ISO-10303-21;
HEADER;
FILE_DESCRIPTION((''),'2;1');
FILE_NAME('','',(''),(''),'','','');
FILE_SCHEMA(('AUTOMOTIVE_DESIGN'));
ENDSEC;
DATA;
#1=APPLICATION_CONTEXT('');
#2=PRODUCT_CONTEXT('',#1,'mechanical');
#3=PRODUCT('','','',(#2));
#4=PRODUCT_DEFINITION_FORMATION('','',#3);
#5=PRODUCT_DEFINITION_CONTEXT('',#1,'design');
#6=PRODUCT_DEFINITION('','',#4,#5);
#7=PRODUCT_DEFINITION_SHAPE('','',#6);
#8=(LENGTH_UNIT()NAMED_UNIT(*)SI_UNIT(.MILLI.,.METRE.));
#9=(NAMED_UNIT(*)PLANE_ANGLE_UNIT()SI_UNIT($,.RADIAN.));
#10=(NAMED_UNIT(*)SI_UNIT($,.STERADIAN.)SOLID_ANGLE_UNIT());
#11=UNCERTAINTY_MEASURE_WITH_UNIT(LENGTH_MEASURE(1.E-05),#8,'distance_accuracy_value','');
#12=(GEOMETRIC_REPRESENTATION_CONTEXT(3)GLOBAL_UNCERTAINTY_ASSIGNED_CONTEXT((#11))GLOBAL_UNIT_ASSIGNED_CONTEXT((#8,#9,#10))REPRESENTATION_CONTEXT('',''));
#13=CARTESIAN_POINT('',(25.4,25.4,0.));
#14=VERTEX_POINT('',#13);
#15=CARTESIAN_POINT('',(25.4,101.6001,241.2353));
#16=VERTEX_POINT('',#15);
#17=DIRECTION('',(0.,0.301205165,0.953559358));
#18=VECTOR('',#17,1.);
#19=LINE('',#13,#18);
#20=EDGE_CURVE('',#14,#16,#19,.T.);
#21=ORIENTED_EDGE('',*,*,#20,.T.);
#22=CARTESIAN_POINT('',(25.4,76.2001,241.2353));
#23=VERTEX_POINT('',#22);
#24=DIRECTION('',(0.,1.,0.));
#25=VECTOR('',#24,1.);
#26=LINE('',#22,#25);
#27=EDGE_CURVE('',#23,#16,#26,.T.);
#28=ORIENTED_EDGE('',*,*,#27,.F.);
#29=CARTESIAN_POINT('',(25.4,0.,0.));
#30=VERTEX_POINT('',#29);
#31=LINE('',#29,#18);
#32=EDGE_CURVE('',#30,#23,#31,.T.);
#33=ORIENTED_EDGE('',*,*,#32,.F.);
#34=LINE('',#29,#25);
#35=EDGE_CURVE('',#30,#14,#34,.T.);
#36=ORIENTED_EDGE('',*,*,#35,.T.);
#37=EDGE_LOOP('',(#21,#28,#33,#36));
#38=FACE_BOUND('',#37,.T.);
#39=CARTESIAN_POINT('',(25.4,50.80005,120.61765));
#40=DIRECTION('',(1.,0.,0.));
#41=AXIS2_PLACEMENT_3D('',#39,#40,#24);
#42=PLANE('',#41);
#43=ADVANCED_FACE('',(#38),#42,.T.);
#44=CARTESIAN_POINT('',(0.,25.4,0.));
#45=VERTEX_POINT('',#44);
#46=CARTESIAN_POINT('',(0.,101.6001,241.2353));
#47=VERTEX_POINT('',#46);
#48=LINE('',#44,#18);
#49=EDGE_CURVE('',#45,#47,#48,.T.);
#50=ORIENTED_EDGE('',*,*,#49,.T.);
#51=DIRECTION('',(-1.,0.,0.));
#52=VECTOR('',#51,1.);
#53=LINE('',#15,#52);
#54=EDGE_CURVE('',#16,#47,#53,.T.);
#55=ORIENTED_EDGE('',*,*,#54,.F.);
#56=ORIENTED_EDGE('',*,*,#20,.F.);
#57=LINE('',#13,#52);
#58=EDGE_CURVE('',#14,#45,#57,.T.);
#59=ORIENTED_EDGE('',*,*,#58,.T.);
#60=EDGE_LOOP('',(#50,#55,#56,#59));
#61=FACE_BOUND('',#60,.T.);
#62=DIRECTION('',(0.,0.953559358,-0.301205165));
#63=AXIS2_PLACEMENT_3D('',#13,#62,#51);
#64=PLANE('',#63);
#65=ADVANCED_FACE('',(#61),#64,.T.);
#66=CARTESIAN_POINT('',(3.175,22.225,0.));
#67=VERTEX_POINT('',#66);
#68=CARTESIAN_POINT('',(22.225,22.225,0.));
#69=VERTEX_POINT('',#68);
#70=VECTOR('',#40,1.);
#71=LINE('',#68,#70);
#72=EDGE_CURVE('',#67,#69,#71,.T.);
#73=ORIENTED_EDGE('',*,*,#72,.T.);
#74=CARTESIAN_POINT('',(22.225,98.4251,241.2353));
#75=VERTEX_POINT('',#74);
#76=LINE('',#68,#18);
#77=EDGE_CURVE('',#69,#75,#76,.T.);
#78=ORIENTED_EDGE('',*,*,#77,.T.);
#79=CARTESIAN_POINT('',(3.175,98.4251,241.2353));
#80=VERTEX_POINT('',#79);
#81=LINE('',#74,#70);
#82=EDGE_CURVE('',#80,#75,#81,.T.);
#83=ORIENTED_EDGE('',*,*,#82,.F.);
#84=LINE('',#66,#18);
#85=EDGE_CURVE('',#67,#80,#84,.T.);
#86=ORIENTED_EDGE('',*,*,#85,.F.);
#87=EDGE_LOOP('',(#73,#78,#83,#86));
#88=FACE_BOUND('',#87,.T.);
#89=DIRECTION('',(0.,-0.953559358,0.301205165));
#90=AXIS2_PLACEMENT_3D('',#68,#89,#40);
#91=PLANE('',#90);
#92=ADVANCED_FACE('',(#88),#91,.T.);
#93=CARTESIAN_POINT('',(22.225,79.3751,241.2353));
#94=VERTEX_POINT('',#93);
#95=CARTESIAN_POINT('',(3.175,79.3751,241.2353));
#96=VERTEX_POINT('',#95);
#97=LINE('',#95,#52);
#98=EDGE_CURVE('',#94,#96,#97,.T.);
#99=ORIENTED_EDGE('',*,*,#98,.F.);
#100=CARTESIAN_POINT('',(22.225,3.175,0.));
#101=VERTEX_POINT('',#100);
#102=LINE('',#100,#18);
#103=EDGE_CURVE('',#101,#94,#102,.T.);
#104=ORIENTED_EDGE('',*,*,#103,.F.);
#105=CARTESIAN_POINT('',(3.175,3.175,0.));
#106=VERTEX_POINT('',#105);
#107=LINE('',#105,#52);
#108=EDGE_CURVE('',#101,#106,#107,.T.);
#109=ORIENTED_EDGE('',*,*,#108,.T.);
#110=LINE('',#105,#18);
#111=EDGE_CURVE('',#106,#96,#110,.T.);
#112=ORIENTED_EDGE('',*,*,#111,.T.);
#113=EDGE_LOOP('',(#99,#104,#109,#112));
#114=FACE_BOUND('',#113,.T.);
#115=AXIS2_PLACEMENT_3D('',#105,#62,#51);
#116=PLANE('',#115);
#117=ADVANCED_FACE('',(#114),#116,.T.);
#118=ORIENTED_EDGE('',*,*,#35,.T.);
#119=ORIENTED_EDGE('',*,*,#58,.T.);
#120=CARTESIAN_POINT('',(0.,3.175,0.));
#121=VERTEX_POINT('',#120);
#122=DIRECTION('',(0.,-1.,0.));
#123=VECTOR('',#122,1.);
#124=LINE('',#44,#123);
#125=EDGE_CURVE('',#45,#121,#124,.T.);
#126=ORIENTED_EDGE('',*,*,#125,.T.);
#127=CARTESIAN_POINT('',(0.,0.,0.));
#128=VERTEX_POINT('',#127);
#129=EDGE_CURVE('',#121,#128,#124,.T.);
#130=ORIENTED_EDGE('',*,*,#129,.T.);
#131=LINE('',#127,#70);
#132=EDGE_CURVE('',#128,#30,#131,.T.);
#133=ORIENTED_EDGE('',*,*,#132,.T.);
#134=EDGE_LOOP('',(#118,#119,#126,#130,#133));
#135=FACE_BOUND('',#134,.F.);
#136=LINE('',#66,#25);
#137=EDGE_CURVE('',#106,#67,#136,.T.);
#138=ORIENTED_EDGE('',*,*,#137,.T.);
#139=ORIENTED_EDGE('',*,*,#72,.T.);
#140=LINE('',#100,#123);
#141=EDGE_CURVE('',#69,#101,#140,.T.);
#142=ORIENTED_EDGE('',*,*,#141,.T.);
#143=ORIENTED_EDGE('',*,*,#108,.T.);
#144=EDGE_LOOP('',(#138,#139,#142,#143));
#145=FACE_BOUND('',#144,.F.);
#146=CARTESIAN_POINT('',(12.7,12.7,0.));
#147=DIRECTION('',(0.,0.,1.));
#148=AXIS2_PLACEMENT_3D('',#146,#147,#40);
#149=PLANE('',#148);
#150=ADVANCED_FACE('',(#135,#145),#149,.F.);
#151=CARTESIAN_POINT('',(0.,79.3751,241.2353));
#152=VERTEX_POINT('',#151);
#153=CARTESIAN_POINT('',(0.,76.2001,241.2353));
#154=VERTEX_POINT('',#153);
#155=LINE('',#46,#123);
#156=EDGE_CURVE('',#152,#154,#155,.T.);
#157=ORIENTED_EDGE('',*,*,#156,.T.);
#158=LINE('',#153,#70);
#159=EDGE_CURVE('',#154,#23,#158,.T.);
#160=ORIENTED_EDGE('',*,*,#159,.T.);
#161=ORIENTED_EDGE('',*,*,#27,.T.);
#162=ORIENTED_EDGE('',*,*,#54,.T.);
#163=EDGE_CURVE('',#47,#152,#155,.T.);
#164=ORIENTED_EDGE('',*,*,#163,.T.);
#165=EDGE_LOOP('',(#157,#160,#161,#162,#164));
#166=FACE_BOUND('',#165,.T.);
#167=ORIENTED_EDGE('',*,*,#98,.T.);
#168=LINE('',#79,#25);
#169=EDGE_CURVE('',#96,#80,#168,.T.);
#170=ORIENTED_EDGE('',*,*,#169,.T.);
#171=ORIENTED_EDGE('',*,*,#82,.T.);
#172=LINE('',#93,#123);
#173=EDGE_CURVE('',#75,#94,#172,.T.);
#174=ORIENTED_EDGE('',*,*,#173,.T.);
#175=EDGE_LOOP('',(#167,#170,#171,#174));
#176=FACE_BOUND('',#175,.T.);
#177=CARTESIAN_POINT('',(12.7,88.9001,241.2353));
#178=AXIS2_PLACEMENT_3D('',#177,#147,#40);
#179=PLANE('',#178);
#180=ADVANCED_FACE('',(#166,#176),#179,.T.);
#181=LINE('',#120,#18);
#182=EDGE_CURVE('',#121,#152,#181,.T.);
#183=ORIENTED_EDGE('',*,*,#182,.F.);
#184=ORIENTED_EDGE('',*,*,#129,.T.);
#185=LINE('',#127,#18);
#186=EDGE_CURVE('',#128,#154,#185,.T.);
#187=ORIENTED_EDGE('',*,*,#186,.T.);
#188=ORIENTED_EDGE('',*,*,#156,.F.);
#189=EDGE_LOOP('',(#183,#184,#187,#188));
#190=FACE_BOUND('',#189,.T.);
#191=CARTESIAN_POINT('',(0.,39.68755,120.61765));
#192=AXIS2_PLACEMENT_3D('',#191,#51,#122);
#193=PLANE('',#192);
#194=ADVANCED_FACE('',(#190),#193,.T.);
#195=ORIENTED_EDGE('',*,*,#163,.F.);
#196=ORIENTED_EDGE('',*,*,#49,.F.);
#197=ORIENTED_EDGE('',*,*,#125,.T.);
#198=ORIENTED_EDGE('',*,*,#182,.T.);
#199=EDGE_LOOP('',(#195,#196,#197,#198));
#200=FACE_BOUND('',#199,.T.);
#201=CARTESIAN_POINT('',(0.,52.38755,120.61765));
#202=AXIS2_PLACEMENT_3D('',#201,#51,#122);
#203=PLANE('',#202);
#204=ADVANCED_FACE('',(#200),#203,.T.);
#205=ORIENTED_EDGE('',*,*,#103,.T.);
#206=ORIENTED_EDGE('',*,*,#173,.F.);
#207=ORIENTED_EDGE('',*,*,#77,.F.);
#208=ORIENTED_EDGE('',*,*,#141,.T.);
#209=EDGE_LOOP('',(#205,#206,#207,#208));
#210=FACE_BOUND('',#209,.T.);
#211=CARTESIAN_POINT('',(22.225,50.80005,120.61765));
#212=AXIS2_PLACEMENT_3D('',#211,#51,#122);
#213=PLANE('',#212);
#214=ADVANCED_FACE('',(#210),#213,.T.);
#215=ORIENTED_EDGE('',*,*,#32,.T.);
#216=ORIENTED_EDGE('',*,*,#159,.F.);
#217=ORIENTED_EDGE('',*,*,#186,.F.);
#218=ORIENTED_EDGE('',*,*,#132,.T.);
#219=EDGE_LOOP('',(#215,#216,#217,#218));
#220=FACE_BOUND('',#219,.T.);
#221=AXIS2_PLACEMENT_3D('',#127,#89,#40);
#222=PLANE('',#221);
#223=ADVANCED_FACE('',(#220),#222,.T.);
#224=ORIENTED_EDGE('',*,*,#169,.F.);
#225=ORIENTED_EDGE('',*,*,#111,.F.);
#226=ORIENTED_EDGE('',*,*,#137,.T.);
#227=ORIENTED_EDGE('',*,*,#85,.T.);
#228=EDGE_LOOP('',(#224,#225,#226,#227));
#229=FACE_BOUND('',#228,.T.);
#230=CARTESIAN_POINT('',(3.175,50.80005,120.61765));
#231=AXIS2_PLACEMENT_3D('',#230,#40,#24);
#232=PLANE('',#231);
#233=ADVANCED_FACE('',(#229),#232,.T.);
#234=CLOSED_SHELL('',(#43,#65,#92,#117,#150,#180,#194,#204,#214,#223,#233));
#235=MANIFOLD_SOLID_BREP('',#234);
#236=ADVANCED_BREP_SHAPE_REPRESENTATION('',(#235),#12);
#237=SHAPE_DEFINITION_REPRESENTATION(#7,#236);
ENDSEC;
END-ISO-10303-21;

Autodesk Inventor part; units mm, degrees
ref_plane "XZ Plane" through (0, 0, 0) normal (0, 1, 0) x (-1, 0, 0)
sketch "Sketch1" plane through (0, 0, 0) normal (0, 0, 1) x (1, 0, 0)
  line L0 (0, 0) -> (25.4, 0)
  line L1 (25.4, 0) -> (25.4, 25.4)
  line L2 (25.4, 25.4) -> (0, 25.4)
  line L3 (0, 25.4) -> (0, 0)
  line L4 (0, 0) -> (0, 3.175)
  line L5 (0, 3.175) -> (3.175, 3.175)
  line L6 (3.175, 3.175) -> (22.225, 3.175)
  line L7 (22.225, 3.175) -> (22.225, 22.225)
  line L8 (22.225, 22.225) -> (3.175, 22.225)
  line L9 (3.175, 22.225) -> (3.175, 3.175)
  dimension "d0" = 25.4
  dimension "d1" = 25.4
  dimension "d2" = 3.175
  dimension "d3" = 3.175
  dimension "d4" = 19.05
  dimension "d5" = 19.05
ref_plane "Work Plane1" through (0, 0, 0) normal (0, 0, 1) x (1, 0, 0)
ref_plane "Work Plane2" through (12.7, 0, 0) normal (1, 0, 0) x (0, 1, 0)
sketch "Sketch2" plane through (12.7, 0, 0) normal (1, 0, 0) x (0, 1, 0)
  line L0 (12.7, 0) -> (88.9001, 241.2353)
  line L1 (12.7, 0) -> (265.684, 0) construction
  line L2 (0, 0) -> (25.4, 0) projected
  dimension "d9" = 252.984
  dimension "d10" = 72.47
  dimension "d12" = 12.7
  dimension "d13" = 0
sweep "Sweep1" add profiles "Sketch1" path "Sketch2" path curves L0
properties part number "Wonkey"
